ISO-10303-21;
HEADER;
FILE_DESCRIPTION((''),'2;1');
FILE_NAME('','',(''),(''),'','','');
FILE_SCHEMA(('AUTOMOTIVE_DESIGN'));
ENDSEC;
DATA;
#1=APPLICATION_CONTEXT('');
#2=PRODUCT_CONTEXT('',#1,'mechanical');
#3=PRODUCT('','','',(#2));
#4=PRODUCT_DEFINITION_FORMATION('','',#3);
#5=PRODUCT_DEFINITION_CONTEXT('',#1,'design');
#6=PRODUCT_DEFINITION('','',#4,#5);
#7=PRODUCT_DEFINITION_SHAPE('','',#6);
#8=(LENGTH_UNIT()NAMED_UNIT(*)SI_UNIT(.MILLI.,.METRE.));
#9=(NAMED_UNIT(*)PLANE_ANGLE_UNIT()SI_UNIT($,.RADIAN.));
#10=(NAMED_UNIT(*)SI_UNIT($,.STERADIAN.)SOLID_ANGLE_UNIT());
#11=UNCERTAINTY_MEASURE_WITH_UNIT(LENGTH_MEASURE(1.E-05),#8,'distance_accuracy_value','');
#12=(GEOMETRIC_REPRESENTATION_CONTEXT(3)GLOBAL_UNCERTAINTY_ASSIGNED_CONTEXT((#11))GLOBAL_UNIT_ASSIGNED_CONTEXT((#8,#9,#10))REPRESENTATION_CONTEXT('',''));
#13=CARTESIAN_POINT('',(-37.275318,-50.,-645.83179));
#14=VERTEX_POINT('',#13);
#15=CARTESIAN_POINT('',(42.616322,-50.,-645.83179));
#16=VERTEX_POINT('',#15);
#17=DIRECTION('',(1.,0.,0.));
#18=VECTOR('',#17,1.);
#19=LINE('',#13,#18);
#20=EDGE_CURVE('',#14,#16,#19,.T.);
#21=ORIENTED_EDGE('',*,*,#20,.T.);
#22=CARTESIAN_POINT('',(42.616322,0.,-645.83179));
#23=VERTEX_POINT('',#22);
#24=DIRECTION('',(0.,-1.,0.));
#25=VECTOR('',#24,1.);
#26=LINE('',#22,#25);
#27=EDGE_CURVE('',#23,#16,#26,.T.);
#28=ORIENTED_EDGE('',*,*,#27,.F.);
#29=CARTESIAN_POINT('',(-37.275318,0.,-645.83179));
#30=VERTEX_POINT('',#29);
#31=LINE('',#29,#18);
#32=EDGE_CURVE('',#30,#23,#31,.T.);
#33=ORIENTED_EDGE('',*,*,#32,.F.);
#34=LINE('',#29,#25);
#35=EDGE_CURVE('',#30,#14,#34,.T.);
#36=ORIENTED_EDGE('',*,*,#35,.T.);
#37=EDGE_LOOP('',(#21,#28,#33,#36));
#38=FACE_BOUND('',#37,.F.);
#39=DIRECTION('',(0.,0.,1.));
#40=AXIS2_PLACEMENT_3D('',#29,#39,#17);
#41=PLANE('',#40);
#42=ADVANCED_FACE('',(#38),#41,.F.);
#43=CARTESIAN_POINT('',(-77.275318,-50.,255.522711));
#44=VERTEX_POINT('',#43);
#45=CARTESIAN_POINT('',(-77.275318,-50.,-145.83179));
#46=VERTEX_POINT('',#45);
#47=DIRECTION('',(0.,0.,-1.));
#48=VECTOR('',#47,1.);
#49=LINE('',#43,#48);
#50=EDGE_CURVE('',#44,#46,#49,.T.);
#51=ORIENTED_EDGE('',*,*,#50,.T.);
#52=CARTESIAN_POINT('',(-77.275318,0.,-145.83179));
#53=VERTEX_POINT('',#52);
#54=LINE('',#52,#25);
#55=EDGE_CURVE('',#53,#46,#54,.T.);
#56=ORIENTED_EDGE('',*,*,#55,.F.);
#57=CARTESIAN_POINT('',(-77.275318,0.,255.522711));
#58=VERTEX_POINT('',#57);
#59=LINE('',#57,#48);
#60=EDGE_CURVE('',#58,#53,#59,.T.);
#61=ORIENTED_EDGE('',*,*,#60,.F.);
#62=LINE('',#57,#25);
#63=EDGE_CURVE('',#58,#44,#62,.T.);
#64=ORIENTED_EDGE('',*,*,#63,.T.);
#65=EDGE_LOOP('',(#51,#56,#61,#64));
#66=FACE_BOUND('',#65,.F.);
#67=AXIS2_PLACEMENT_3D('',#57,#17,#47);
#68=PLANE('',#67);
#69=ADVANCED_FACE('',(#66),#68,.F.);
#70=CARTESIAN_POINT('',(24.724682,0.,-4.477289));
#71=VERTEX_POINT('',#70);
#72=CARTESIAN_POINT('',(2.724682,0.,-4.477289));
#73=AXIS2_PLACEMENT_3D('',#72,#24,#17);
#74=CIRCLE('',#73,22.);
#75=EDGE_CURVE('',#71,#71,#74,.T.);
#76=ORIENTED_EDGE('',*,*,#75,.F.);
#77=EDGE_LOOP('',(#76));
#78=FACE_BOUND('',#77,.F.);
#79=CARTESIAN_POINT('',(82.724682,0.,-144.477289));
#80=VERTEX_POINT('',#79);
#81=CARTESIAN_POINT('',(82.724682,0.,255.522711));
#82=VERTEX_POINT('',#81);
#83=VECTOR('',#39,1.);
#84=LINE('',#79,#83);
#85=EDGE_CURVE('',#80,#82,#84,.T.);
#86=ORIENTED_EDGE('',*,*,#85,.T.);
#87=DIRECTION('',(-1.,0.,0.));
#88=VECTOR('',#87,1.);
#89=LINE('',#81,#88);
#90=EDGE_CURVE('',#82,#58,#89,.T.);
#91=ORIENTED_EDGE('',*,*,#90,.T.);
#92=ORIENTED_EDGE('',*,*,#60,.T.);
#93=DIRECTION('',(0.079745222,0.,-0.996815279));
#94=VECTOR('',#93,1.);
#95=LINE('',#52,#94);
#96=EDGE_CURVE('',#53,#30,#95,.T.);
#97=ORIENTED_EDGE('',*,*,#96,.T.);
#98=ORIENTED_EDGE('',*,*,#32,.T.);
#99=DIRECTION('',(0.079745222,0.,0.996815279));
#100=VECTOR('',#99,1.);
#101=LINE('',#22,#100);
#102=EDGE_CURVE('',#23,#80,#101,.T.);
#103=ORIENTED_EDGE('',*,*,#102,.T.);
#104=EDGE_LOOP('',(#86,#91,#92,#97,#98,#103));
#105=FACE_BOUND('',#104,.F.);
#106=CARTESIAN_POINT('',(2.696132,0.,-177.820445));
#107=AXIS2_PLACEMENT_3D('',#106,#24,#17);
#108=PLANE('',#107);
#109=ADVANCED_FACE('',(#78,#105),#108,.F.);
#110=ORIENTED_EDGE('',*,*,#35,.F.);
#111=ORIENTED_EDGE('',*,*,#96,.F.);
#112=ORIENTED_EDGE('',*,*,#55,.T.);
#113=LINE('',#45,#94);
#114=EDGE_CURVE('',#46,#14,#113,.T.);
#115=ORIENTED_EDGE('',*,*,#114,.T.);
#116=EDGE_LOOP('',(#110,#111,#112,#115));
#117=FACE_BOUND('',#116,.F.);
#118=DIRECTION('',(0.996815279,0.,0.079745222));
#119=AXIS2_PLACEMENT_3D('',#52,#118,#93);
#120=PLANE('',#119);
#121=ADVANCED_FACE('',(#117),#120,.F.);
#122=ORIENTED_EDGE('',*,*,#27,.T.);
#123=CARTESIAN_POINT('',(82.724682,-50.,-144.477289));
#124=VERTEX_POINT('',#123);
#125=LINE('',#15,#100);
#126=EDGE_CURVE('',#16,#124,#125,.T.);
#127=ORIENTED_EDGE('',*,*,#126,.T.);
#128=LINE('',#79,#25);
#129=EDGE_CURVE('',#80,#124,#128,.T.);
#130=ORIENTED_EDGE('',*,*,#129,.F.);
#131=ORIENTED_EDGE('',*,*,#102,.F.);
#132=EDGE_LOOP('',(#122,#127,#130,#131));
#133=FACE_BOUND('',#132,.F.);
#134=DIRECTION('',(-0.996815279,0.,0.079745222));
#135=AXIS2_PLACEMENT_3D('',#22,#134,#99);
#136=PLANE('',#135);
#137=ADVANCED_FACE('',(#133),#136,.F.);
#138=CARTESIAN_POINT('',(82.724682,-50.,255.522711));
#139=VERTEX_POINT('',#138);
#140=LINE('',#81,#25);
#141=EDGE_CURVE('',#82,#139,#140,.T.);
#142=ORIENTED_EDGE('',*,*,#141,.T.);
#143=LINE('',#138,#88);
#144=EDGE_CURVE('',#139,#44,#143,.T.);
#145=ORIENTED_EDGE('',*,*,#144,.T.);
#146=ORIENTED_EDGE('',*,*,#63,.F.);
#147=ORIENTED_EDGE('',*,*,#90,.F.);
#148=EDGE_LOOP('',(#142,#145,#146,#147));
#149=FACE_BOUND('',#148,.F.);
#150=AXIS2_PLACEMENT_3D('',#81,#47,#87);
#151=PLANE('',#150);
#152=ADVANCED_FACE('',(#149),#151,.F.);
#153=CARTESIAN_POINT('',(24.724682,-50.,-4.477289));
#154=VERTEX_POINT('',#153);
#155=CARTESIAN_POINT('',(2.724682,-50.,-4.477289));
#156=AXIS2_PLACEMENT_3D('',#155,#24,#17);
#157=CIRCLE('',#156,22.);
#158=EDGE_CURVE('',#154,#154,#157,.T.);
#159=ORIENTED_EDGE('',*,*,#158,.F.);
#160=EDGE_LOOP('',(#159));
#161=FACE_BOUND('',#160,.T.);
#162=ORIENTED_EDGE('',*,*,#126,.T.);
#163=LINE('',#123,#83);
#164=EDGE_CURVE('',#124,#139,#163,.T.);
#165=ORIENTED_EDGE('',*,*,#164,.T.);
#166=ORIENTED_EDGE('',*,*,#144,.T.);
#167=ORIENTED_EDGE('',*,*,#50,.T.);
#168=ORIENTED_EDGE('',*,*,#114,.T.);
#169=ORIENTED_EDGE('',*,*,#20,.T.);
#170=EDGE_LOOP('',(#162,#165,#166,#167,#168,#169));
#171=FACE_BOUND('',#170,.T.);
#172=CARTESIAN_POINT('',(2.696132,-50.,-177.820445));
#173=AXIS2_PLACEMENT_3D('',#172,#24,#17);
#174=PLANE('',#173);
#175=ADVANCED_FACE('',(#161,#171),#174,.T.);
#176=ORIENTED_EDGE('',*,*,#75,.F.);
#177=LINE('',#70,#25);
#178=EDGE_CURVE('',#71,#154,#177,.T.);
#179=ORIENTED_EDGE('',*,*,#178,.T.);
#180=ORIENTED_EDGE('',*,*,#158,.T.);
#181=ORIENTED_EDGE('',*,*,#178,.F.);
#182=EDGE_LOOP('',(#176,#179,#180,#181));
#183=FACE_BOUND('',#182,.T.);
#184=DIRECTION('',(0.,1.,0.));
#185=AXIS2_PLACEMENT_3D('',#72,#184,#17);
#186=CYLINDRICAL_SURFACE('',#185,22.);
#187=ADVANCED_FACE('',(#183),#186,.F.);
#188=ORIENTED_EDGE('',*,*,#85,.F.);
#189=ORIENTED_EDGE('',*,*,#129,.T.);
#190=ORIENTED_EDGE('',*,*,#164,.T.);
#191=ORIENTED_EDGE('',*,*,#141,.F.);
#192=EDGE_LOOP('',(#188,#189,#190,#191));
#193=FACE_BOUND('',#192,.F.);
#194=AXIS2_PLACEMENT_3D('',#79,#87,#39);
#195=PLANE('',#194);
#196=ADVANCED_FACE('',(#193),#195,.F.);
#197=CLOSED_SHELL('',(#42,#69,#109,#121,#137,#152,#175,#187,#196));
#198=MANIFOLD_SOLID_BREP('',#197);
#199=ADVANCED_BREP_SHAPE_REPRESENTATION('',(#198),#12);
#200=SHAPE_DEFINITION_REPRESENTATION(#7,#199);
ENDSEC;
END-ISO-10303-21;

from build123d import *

# Parameters (mm, degrees)
F0_R     = 22
F1_DEPTH = 50


# Not quite as in the source:
# - a feature names something its author has since deleted; it is built from what else it names


with BuildPart() as f1:
    # F0 (on Front) → F1 (new body)
    with BuildSketch(Plane.XZ):
        Polygon((82.7246823907, 255.5227107533), (-77.2753176093, 255.5227107533), (-77.2753176093, -145.831789898), (-37.2753176093, -645.831789898), (42.6163223386, -645.831789898), (82.7246823907, -144.4772892467), align=None)
        with Locations((2.7246823907, -4.4772892467)):
            Circle(F0_R, mode=Mode.SUBTRACT)
    extrude(amount=F1_DEPTH)


solid = f1.part
